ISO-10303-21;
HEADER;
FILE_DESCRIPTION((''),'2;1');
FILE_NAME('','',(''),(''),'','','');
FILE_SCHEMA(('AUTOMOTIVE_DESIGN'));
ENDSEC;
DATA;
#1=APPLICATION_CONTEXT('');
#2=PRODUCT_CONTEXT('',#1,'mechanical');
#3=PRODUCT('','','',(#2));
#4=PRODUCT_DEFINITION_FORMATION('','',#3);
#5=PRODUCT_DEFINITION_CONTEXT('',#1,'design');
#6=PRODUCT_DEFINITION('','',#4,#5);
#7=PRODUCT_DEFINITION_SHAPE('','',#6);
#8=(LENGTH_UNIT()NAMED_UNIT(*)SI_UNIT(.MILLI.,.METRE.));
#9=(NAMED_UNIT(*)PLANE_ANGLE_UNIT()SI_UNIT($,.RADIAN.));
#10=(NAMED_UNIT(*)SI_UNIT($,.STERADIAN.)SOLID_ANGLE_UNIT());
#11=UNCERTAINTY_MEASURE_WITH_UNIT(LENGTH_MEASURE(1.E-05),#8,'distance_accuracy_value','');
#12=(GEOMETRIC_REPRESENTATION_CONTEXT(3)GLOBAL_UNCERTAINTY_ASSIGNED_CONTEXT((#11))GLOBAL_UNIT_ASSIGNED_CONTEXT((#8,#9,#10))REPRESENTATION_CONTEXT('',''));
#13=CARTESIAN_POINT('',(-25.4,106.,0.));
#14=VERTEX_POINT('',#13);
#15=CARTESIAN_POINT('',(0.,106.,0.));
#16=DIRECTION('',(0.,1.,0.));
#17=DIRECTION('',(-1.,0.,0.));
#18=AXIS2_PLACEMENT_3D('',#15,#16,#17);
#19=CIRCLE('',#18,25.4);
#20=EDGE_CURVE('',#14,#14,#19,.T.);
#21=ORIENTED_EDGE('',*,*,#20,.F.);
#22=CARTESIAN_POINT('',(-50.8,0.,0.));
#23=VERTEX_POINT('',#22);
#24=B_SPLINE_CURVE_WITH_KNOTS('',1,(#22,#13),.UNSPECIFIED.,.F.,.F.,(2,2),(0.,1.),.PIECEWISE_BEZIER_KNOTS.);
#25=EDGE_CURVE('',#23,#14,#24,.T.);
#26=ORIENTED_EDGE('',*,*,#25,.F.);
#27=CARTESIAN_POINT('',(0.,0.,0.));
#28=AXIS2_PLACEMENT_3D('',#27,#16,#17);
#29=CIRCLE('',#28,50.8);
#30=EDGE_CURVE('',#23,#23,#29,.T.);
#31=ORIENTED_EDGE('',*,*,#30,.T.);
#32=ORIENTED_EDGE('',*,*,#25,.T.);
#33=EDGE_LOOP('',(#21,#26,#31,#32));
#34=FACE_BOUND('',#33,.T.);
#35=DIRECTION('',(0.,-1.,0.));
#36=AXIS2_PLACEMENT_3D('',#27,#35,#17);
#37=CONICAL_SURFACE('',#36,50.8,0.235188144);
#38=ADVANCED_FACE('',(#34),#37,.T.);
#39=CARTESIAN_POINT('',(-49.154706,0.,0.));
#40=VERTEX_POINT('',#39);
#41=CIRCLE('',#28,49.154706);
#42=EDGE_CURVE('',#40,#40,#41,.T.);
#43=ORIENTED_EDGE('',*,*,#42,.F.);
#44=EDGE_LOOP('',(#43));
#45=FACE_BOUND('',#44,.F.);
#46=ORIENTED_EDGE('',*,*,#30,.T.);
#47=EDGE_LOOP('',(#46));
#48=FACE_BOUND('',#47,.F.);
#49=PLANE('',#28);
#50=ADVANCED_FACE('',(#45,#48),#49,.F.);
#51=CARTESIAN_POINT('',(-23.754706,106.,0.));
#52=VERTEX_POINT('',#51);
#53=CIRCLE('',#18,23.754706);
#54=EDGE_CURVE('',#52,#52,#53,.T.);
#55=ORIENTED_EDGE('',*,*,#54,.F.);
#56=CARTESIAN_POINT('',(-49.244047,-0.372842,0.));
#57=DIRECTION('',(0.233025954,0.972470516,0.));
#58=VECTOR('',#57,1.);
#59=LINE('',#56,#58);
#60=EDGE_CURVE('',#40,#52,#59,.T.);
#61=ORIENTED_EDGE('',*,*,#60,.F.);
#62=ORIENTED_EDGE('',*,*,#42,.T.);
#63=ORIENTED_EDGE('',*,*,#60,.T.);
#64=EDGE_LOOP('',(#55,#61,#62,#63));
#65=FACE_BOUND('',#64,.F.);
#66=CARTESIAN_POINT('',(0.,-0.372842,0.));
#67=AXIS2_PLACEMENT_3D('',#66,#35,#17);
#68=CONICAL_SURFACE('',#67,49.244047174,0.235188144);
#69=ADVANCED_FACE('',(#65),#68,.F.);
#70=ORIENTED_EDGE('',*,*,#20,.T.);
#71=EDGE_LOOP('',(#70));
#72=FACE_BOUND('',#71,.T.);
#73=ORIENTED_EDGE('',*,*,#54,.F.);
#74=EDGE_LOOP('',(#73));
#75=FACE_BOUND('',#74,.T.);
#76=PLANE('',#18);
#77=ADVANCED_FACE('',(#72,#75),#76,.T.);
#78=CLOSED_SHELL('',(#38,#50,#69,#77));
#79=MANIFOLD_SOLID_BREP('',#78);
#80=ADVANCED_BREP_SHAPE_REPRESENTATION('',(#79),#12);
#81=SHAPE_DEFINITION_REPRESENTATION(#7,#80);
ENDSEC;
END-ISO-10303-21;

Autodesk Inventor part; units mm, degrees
ref_plane "YZ Plane" through (0, 0, 0) normal (1, 0, 0) x (0, 1, 0)
ref_plane "XY Plane" through (0, 0, 0) normal (0, 0, 1) x (1, 0, 0)
sketch "Szkic6" plane through (0, 0, 0) normal (0, 1, 0) x (-1, 0, 0)
  circle A0 centre (0, 0) radius 50.8
  dimension "d33" = 101.6
ref_plane "Płaszczyzna konstrukcyjna1" through (0, 106, 0) normal (0, 1, 0) x (-1, 0, 0)
sketch "Szkic7" plane through (0, 106, 0) normal (0, 1, 0) x (-1, 0, 0)
  circle A0 centre (0, 0) radius 25.4
  dimension "d35" = 50.8
loft "Wyciągnięcie złożone1" add profiles "Szkic6", "Szkic7"
shell "Skorupa1" thickness 1.6 removed faces 2 at (7.2508, 106, -1.9085) at (7.3018, 0, 11.5135)
equation "\"d33\" = OD1"
equation "\"d35\" = OD2"
equation "\"d52\" = THK"
equation "\"SzerokośćGięciaPodcięcia\" = Grubość"
equation "\"RozmiarPodcięciaNarożnika\" = 4 * Grubość"
equation "\"PromieńPrzejścia\" = PromieńGięcia"
equation "\"Rozmiar_promienia_Jacobiego\" = PromieńGięcia"
equation "\"Wielk_odstępu\" = Grubość"
equation "\"d2\" = PromieńGięcia"
equation "\"d23\" = PromieńGięcia"
equation "\"OD1\" = 101.6"
equation "\"OD2\" = 50.8"
equation "\"L\" = 106"
equation "\"THK\" = 1.6"
equation "\"d34\" = L"
equation "\"Grubość\" = 1.5"
equation "\"PromieńGięcia\" = 3"
properties part number "Redukcja symetryczna Ø101,6x50,8x1,6 L=106" material "304"
